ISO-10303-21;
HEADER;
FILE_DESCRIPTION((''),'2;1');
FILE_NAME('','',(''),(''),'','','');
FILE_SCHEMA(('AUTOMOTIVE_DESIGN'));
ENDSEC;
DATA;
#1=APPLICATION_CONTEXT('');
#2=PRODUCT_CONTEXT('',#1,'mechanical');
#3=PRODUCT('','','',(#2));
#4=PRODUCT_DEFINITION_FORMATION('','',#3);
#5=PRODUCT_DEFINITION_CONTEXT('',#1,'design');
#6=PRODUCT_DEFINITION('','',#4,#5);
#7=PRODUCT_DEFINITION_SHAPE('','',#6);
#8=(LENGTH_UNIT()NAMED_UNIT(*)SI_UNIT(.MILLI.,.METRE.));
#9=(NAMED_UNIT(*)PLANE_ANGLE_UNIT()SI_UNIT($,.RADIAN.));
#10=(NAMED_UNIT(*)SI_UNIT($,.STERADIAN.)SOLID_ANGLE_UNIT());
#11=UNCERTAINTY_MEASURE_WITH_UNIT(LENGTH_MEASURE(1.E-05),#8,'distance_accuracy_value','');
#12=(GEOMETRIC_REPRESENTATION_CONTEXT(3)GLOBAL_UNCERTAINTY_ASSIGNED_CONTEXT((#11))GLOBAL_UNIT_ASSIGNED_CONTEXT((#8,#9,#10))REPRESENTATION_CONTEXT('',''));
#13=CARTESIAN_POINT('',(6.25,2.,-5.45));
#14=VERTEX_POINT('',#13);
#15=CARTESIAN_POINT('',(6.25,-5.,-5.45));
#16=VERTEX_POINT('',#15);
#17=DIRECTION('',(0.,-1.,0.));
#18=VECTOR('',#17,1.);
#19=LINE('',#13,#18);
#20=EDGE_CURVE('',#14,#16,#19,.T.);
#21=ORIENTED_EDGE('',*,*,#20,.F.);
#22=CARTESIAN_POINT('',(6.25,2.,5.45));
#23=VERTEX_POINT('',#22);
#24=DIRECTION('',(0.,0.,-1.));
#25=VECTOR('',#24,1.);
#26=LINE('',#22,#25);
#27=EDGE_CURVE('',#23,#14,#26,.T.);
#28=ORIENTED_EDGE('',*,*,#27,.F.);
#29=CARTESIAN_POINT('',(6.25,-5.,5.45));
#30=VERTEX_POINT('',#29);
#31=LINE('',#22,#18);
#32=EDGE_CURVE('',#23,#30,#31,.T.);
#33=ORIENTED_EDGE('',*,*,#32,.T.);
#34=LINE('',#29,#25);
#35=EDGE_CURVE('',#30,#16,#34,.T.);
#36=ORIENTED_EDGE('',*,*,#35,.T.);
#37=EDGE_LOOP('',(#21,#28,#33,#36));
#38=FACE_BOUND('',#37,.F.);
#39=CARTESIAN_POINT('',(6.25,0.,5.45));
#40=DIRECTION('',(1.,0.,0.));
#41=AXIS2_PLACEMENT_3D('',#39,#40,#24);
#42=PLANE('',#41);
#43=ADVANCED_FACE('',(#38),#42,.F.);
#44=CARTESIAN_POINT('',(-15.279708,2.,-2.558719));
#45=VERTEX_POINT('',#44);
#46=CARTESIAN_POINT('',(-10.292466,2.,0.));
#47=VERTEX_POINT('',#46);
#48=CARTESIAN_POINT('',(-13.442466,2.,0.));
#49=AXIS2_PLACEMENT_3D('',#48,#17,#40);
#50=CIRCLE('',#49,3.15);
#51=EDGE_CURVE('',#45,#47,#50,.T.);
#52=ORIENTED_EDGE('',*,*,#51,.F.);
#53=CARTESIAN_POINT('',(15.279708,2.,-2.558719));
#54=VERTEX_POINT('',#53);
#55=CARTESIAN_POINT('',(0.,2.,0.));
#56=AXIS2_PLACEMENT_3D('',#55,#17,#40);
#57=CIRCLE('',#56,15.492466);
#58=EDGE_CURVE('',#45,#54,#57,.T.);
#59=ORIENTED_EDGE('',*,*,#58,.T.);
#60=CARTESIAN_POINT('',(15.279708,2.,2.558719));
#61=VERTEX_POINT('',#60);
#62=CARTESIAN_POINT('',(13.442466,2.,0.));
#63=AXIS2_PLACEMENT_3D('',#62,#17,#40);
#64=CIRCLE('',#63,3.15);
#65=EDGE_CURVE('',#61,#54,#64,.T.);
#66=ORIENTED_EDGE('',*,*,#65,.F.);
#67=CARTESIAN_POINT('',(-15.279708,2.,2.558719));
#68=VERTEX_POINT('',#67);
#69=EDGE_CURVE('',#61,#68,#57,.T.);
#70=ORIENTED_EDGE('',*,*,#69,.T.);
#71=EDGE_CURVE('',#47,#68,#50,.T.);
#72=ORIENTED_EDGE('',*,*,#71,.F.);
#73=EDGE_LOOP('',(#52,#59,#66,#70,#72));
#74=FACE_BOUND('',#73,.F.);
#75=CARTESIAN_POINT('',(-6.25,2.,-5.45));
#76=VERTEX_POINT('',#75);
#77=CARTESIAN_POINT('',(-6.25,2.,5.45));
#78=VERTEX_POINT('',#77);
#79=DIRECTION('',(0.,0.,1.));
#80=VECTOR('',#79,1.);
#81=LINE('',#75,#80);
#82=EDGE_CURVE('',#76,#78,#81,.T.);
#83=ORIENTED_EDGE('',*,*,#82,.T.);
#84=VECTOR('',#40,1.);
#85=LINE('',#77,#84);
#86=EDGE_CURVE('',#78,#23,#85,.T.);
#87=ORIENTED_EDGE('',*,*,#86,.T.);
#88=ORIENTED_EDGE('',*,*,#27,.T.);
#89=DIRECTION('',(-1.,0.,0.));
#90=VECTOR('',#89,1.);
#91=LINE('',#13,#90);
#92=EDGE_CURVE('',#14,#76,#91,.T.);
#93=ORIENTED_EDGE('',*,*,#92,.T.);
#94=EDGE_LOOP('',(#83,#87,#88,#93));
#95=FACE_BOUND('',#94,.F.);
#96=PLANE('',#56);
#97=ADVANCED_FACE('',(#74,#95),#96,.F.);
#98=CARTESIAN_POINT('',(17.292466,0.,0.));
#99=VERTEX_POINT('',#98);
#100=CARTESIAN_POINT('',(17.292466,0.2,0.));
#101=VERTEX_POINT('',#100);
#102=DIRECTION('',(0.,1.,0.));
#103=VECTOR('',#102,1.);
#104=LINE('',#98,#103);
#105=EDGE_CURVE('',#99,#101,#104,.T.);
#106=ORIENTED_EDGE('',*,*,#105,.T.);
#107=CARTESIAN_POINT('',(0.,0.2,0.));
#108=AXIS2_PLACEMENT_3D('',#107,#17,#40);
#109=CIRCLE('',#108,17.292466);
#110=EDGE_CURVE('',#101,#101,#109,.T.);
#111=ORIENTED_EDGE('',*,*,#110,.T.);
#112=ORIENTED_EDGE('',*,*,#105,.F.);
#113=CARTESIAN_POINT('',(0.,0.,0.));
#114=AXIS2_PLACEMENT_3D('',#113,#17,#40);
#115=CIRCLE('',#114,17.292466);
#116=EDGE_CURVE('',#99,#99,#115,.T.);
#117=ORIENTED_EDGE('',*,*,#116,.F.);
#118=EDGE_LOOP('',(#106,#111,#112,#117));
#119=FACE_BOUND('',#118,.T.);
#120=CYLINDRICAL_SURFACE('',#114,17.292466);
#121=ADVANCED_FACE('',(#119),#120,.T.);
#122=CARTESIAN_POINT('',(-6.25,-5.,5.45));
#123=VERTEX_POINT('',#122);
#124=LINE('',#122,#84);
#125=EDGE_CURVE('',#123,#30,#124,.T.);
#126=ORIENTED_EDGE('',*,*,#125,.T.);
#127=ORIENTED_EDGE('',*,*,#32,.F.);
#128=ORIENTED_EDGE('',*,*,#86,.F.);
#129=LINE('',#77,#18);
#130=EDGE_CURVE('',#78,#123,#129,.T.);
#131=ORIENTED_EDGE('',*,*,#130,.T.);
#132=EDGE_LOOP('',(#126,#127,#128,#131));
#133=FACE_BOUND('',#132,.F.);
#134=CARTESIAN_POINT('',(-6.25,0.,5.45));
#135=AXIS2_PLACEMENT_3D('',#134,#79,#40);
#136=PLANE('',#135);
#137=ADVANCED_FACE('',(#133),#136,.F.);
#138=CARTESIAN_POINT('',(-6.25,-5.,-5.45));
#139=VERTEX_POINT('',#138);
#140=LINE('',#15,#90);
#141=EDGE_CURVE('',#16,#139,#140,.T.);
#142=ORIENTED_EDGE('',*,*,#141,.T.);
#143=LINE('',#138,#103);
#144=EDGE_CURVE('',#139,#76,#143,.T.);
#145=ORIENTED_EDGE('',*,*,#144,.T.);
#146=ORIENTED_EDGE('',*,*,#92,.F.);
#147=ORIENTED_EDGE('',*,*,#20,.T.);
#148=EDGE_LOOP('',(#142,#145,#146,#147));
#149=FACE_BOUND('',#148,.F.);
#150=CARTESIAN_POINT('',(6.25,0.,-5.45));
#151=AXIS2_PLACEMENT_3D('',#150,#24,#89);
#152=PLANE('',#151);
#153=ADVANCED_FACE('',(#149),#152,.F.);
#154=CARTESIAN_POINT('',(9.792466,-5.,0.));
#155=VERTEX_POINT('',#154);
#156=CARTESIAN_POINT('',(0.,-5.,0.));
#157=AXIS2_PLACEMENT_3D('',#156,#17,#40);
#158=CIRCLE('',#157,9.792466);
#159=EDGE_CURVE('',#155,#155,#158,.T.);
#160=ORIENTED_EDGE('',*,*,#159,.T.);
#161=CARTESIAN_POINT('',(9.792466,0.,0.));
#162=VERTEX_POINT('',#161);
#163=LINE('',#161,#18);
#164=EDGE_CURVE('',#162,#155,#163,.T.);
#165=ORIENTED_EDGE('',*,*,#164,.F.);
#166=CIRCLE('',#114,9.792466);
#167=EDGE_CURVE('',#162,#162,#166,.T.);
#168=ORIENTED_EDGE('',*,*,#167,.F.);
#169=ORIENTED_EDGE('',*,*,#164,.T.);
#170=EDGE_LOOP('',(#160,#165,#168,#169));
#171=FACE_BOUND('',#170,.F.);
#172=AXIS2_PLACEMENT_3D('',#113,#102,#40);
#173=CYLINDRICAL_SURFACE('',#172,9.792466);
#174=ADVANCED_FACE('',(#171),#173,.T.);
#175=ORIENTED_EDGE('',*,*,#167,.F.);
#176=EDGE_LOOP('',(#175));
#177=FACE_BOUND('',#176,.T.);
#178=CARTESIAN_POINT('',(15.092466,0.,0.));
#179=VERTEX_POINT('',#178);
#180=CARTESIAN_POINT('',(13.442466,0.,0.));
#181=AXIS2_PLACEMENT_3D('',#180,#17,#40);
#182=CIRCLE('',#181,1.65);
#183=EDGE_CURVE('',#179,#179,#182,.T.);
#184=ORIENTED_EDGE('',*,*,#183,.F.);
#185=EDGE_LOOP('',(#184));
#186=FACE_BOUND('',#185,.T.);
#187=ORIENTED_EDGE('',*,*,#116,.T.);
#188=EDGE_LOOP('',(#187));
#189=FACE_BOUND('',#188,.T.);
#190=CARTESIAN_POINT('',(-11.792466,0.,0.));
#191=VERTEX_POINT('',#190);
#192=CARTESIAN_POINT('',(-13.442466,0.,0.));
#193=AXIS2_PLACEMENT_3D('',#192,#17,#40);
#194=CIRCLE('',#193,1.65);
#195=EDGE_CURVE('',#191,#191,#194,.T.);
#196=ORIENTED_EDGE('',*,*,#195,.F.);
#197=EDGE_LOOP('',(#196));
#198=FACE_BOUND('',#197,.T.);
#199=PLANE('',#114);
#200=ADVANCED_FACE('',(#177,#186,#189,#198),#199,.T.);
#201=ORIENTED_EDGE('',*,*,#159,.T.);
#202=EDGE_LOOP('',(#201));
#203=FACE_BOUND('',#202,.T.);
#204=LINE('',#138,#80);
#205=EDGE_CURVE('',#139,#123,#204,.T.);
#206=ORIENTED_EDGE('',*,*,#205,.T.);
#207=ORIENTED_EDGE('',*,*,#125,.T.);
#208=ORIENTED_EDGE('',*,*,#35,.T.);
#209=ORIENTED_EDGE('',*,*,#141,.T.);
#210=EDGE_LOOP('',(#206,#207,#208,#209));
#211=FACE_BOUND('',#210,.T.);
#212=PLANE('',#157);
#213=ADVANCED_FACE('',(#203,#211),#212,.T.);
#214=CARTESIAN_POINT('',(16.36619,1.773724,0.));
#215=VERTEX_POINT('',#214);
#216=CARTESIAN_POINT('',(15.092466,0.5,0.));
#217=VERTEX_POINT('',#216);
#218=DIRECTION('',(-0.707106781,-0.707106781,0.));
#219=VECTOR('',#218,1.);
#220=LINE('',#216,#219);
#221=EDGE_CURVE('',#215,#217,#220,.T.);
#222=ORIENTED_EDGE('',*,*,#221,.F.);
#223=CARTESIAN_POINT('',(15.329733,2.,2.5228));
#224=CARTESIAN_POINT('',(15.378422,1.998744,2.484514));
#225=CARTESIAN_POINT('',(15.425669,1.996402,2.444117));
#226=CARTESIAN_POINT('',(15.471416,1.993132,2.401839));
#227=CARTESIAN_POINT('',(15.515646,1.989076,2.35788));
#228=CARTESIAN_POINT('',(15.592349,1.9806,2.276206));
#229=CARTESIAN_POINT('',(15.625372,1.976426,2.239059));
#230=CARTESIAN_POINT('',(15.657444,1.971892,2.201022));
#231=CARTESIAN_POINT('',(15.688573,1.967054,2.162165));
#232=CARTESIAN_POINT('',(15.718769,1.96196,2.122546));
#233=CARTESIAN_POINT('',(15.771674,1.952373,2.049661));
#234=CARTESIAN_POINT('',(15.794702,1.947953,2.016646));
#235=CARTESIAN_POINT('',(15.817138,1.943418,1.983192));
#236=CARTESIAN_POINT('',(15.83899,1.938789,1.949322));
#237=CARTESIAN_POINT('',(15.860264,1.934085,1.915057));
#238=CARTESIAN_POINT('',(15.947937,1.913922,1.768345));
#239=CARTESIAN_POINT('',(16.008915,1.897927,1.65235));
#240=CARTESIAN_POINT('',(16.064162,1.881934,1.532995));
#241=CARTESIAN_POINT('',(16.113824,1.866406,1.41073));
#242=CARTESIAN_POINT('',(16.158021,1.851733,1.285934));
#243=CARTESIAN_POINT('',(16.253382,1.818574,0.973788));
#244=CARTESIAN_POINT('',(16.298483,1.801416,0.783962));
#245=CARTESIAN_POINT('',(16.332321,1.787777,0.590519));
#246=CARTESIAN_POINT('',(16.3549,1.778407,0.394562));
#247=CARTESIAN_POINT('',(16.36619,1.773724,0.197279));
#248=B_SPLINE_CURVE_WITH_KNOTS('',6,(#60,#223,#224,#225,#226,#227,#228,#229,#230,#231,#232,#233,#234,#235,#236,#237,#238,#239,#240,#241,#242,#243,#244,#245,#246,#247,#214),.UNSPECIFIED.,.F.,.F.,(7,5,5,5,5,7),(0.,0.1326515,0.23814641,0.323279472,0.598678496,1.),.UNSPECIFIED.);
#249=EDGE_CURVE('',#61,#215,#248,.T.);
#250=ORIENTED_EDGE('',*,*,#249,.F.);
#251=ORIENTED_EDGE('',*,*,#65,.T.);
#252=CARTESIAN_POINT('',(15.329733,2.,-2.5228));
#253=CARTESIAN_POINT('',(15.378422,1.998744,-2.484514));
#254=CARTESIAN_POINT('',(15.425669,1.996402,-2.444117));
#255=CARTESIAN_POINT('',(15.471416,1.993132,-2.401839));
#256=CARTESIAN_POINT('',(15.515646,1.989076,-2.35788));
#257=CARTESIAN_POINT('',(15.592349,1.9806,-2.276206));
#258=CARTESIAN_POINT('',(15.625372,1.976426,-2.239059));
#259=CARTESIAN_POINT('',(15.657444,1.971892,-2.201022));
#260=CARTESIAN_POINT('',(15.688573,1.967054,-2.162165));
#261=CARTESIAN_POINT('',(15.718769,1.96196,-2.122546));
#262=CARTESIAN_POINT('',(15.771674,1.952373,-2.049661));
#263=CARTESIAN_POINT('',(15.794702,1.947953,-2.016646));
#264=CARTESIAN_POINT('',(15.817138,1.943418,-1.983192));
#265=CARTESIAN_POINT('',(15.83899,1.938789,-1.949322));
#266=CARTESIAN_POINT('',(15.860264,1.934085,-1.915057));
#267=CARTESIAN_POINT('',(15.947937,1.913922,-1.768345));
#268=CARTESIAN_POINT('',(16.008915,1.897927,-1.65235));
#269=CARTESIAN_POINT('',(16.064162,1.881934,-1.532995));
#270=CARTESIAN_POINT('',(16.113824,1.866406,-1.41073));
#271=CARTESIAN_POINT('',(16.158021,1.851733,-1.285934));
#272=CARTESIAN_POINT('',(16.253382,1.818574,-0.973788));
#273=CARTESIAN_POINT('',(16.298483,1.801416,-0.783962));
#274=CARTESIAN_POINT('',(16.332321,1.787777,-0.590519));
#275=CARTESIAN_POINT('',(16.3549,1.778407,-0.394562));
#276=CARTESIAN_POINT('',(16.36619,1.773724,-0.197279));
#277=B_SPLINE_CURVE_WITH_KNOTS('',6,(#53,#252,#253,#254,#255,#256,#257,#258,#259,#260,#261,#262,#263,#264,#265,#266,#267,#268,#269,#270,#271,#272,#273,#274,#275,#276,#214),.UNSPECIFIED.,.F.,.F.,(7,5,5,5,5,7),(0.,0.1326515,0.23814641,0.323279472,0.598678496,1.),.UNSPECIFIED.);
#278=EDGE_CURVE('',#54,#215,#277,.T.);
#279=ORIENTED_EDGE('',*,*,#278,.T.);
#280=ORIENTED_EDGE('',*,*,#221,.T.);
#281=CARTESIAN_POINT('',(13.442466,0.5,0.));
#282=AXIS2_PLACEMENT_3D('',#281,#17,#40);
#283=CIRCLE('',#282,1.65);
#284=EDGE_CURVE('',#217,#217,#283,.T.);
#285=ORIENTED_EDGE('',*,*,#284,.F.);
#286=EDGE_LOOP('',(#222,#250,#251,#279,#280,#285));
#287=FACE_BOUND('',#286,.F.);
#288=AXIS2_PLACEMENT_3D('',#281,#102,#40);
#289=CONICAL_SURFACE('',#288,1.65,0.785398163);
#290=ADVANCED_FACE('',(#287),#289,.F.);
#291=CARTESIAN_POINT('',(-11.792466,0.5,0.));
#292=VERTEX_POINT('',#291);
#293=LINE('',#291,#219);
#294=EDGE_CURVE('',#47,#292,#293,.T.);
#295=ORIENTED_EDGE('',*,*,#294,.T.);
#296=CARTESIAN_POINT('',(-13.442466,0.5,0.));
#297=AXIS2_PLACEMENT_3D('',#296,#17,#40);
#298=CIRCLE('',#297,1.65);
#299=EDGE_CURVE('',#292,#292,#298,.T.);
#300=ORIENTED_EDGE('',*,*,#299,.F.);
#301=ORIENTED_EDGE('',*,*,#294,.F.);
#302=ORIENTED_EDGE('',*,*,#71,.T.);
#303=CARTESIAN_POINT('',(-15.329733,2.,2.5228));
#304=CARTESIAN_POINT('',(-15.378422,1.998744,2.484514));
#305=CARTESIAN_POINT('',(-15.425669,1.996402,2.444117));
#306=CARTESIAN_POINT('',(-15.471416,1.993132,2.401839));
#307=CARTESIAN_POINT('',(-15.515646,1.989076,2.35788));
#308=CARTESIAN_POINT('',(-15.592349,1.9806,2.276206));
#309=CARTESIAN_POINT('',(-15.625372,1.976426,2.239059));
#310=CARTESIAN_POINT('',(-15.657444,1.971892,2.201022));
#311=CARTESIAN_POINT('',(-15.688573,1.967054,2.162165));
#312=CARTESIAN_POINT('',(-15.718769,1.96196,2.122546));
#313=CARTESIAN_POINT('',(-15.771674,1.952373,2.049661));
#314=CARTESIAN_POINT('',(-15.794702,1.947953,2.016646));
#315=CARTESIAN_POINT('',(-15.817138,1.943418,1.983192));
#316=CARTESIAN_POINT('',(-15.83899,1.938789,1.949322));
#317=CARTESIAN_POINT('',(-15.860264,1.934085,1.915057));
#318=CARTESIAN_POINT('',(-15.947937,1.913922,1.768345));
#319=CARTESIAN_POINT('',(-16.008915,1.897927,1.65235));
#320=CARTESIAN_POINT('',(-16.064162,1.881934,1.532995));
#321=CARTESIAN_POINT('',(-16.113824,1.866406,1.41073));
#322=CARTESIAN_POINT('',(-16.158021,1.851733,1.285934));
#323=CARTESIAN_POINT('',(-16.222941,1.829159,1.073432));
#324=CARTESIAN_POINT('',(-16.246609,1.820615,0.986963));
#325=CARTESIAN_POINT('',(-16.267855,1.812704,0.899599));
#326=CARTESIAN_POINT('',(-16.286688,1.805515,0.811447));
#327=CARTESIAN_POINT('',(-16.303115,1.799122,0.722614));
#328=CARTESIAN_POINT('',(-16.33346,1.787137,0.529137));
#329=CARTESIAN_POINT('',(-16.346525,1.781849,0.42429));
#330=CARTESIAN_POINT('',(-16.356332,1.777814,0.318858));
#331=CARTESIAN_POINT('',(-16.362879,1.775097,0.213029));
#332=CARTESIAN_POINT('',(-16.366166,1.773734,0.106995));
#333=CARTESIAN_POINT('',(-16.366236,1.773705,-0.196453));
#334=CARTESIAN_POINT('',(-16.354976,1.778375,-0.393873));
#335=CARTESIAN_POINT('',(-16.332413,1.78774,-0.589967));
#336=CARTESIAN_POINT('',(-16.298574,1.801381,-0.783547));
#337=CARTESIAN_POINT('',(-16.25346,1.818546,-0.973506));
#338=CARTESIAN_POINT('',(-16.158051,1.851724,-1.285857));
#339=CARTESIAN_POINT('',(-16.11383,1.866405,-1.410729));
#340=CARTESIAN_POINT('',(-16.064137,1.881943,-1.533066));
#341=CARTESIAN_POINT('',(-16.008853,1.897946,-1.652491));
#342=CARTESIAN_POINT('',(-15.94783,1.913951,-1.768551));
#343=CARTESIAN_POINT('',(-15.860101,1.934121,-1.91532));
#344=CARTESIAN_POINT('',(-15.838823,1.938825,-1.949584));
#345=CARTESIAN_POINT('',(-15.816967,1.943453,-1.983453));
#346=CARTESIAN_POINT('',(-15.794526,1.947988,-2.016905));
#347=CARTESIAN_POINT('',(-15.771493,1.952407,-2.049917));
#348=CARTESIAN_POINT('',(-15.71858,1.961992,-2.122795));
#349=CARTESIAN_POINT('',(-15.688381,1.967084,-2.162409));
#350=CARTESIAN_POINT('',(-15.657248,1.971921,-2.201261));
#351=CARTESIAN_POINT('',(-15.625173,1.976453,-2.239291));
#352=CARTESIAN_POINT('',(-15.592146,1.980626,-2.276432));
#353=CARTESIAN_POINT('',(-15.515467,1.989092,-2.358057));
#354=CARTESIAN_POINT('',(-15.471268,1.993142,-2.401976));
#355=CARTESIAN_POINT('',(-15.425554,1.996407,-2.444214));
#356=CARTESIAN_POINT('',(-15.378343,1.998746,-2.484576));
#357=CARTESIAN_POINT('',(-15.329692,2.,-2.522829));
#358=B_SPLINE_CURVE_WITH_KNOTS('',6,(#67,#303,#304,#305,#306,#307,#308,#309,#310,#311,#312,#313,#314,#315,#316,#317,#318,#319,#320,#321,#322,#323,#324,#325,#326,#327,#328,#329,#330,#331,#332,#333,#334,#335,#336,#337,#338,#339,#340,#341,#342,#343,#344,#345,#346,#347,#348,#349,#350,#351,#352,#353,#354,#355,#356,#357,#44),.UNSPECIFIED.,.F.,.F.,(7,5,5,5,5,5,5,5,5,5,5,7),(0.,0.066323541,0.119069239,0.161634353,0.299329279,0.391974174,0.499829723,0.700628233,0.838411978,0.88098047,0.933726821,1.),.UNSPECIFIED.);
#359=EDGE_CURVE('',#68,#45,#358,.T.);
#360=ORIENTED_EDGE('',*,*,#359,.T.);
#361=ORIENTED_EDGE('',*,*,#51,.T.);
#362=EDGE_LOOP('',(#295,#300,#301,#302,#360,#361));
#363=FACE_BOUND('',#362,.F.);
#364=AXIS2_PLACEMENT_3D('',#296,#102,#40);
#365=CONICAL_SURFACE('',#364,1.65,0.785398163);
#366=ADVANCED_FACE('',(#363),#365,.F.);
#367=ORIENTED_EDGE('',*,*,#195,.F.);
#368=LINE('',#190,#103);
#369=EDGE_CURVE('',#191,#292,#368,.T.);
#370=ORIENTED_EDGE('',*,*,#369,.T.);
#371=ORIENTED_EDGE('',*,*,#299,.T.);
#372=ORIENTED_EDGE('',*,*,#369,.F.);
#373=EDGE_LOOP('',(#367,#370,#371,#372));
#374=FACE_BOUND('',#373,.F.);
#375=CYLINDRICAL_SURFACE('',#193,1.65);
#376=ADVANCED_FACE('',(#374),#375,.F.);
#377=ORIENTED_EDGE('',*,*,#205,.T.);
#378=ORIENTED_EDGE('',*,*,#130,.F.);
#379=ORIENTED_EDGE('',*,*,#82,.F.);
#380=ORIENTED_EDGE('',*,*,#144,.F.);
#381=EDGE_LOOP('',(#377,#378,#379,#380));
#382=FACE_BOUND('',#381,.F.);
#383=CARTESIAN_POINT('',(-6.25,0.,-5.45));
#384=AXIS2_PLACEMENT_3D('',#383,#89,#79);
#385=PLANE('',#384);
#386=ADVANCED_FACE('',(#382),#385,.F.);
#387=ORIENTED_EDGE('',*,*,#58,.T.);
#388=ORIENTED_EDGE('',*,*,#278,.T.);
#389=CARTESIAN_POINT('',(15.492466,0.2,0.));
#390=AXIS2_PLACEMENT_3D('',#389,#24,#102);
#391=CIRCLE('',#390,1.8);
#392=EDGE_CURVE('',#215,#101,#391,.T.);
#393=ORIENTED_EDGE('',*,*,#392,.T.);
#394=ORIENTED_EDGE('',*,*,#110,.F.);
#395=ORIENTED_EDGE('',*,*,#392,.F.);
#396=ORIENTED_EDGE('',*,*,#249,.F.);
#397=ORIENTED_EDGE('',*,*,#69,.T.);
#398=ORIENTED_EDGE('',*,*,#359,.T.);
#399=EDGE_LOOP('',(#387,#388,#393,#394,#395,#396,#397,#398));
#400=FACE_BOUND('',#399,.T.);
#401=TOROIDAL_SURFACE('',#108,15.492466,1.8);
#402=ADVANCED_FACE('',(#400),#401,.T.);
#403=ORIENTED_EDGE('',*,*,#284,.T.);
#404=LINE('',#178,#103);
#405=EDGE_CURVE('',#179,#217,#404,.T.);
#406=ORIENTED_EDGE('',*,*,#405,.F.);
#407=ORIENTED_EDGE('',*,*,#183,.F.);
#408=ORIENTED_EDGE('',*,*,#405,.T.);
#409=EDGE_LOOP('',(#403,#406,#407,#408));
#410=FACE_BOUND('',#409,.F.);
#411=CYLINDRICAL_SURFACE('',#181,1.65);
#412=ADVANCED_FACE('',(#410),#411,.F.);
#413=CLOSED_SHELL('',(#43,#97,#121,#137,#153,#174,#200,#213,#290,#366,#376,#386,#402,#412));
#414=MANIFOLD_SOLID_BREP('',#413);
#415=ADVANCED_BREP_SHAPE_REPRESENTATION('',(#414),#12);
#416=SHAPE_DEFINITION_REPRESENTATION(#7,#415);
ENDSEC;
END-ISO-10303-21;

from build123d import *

# Parameters (mm, degrees)
F0_R     = 17.2924664606
F0_R_2   = 1.65
F0_R_3   = 9.7924664606
F1_DEPTH = 2
F2_DEPTH = 5
F3_SIZE  = 1.5


# Not quite as in the source:
# - a fillet or chamfer that OpenCascade refuses, or shapes differently, is made with other operations: its cross-section is extruded or revolved along the edge and cut away or added


with BuildPart() as f1:
    # F0 (on Front) → F1 (new body)
    with BuildSketch(Plane.XZ):
        Circle(F0_R)
        with Locations((-13.4424664606, 0)):
            Circle(F0_R_2, mode=Mode.SUBTRACT)
        Circle(F0_R_3, mode=Mode.SUBTRACT)
        with Locations((13.4424664606, 0)):
            Circle(F0_R_2, mode=Mode.SUBTRACT)
        Circle(F0_R_3)
        with BuildLine():
            ThreePointArc((8.2924664606, 0), (7.7650793743, -2.9100759974), (6.25, -5.45))
            ThreePointArc((6.25, -5.45), (0, -8.2924664606), (-6.25, -5.45))
            ThreePointArc((-6.25, -5.45), (-8.2924664606, 0), (-6.25, 5.45))
            ThreePointArc((-6.25, 5.45), (0, 8.2924664606), (6.25, 5.45))
            ThreePointArc((6.25, 5.45), (7.7650793743, 2.9100759974), (8.2924664606, 0))
        make_face(mode=Mode.SUBTRACT)
        with BuildLine():
            ThreePointArc((-6.25, 5.45), (-8.2924664606, 0), (-6.25, -5.45))
            Line((-6.25, -5.45), (-6.25, 5.45))
        make_face()
        with BuildLine():
            Line((-6.25, 5.45), (6.25, 5.45))
            ThreePointArc((6.25, 5.45), (0, 8.2924664606), (-6.25, 5.45))
        make_face()
        with BuildLine():
            Line((6.25, 5.45), (6.25, -5.45))
            ThreePointArc((6.25, -5.45), (7.7650793743, -2.9100759974), (8.2924664606, 0))
            ThreePointArc((8.2924664606, 0), (7.7650793743, 2.9100759974), (6.25, 5.45))
        make_face()
        with BuildLine():
            ThreePointArc((-6.25, -5.45), (0, -8.2924664606), (6.25, -5.45))
            Line((6.25, -5.45), (-6.25, -5.45))
        make_face()
    extrude(amount=-F1_DEPTH)

    # F0 (on Front) → F2 (join)
    with BuildSketch(Plane.XZ):
        Circle(F0_R_3)
        with BuildLine():
            ThreePointArc((8.2924664606, 0), (7.7650793743, -2.9100759974), (6.25, -5.45))
            ThreePointArc((6.25, -5.45), (0, -8.2924664606), (-6.25, -5.45))
            ThreePointArc((-6.25, -5.45), (-8.2924664606, 0), (-6.25, 5.45))
            ThreePointArc((-6.25, 5.45), (0, 8.2924664606), (6.25, 5.45))
            ThreePointArc((6.25, 5.45), (7.7650793743, 2.9100759974), (8.2924664606, 0))
        make_face(mode=Mode.SUBTRACT)
        with BuildLine():
            ThreePointArc((-6.25, 5.45), (-8.2924664606, 0), (-6.25, -5.45))
            Line((-6.25, -5.45), (-6.25, 5.45))
        make_face()
        with BuildLine():
            Line((-6.25, 5.45), (6.25, 5.45))
            ThreePointArc((6.25, 5.45), (0, 8.2924664606), (-6.25, 5.45))
        make_face()
        with BuildLine():
            Line((6.25, 5.45), (6.25, -5.45))
            ThreePointArc((6.25, -5.45), (7.7650793743, -2.9100759974), (8.2924664606, 0))
            ThreePointArc((8.2924664606, 0), (7.7650793743, 2.9100759974), (6.25, 5.45))
        make_face()
        with BuildLine():
            ThreePointArc((-6.25, -5.45), (0, -8.2924664606), (6.25, -5.45))
            Line((6.25, -5.45), (-6.25, -5.45))
        make_face()
    extrude(amount=F2_DEPTH)

    # F3
    f3_edges = [f1.edges().sort_by_distance(p)[0] for p in [
        (11.792466, 2, 0),
        (-15.092466, 2, 0),
    ]]
    chamfer(f3_edges, length=F3_SIZE)

    # F4: fillet of radius 1.8 on 1 edges, made by hand

    # F4_s1 → F4_t2 (revolve, cut)
    with BuildSketch(Plane.XY):
        with BuildLine():
            ThreePointArc((15.4924664606, 2), (16.7652586667, 1.4727922061), (17.2924664606, 0.2))
            Line((17.2924664606, 0.2), (17.2924664606, 2))
            Line((17.2924664606, 2), (15.4924664606, 2))
        make_face()
    revolve(axis=Axis((0, 2, 0), (0, -1, 0)), mode=Mode.SUBTRACT)


solid = f1.part
